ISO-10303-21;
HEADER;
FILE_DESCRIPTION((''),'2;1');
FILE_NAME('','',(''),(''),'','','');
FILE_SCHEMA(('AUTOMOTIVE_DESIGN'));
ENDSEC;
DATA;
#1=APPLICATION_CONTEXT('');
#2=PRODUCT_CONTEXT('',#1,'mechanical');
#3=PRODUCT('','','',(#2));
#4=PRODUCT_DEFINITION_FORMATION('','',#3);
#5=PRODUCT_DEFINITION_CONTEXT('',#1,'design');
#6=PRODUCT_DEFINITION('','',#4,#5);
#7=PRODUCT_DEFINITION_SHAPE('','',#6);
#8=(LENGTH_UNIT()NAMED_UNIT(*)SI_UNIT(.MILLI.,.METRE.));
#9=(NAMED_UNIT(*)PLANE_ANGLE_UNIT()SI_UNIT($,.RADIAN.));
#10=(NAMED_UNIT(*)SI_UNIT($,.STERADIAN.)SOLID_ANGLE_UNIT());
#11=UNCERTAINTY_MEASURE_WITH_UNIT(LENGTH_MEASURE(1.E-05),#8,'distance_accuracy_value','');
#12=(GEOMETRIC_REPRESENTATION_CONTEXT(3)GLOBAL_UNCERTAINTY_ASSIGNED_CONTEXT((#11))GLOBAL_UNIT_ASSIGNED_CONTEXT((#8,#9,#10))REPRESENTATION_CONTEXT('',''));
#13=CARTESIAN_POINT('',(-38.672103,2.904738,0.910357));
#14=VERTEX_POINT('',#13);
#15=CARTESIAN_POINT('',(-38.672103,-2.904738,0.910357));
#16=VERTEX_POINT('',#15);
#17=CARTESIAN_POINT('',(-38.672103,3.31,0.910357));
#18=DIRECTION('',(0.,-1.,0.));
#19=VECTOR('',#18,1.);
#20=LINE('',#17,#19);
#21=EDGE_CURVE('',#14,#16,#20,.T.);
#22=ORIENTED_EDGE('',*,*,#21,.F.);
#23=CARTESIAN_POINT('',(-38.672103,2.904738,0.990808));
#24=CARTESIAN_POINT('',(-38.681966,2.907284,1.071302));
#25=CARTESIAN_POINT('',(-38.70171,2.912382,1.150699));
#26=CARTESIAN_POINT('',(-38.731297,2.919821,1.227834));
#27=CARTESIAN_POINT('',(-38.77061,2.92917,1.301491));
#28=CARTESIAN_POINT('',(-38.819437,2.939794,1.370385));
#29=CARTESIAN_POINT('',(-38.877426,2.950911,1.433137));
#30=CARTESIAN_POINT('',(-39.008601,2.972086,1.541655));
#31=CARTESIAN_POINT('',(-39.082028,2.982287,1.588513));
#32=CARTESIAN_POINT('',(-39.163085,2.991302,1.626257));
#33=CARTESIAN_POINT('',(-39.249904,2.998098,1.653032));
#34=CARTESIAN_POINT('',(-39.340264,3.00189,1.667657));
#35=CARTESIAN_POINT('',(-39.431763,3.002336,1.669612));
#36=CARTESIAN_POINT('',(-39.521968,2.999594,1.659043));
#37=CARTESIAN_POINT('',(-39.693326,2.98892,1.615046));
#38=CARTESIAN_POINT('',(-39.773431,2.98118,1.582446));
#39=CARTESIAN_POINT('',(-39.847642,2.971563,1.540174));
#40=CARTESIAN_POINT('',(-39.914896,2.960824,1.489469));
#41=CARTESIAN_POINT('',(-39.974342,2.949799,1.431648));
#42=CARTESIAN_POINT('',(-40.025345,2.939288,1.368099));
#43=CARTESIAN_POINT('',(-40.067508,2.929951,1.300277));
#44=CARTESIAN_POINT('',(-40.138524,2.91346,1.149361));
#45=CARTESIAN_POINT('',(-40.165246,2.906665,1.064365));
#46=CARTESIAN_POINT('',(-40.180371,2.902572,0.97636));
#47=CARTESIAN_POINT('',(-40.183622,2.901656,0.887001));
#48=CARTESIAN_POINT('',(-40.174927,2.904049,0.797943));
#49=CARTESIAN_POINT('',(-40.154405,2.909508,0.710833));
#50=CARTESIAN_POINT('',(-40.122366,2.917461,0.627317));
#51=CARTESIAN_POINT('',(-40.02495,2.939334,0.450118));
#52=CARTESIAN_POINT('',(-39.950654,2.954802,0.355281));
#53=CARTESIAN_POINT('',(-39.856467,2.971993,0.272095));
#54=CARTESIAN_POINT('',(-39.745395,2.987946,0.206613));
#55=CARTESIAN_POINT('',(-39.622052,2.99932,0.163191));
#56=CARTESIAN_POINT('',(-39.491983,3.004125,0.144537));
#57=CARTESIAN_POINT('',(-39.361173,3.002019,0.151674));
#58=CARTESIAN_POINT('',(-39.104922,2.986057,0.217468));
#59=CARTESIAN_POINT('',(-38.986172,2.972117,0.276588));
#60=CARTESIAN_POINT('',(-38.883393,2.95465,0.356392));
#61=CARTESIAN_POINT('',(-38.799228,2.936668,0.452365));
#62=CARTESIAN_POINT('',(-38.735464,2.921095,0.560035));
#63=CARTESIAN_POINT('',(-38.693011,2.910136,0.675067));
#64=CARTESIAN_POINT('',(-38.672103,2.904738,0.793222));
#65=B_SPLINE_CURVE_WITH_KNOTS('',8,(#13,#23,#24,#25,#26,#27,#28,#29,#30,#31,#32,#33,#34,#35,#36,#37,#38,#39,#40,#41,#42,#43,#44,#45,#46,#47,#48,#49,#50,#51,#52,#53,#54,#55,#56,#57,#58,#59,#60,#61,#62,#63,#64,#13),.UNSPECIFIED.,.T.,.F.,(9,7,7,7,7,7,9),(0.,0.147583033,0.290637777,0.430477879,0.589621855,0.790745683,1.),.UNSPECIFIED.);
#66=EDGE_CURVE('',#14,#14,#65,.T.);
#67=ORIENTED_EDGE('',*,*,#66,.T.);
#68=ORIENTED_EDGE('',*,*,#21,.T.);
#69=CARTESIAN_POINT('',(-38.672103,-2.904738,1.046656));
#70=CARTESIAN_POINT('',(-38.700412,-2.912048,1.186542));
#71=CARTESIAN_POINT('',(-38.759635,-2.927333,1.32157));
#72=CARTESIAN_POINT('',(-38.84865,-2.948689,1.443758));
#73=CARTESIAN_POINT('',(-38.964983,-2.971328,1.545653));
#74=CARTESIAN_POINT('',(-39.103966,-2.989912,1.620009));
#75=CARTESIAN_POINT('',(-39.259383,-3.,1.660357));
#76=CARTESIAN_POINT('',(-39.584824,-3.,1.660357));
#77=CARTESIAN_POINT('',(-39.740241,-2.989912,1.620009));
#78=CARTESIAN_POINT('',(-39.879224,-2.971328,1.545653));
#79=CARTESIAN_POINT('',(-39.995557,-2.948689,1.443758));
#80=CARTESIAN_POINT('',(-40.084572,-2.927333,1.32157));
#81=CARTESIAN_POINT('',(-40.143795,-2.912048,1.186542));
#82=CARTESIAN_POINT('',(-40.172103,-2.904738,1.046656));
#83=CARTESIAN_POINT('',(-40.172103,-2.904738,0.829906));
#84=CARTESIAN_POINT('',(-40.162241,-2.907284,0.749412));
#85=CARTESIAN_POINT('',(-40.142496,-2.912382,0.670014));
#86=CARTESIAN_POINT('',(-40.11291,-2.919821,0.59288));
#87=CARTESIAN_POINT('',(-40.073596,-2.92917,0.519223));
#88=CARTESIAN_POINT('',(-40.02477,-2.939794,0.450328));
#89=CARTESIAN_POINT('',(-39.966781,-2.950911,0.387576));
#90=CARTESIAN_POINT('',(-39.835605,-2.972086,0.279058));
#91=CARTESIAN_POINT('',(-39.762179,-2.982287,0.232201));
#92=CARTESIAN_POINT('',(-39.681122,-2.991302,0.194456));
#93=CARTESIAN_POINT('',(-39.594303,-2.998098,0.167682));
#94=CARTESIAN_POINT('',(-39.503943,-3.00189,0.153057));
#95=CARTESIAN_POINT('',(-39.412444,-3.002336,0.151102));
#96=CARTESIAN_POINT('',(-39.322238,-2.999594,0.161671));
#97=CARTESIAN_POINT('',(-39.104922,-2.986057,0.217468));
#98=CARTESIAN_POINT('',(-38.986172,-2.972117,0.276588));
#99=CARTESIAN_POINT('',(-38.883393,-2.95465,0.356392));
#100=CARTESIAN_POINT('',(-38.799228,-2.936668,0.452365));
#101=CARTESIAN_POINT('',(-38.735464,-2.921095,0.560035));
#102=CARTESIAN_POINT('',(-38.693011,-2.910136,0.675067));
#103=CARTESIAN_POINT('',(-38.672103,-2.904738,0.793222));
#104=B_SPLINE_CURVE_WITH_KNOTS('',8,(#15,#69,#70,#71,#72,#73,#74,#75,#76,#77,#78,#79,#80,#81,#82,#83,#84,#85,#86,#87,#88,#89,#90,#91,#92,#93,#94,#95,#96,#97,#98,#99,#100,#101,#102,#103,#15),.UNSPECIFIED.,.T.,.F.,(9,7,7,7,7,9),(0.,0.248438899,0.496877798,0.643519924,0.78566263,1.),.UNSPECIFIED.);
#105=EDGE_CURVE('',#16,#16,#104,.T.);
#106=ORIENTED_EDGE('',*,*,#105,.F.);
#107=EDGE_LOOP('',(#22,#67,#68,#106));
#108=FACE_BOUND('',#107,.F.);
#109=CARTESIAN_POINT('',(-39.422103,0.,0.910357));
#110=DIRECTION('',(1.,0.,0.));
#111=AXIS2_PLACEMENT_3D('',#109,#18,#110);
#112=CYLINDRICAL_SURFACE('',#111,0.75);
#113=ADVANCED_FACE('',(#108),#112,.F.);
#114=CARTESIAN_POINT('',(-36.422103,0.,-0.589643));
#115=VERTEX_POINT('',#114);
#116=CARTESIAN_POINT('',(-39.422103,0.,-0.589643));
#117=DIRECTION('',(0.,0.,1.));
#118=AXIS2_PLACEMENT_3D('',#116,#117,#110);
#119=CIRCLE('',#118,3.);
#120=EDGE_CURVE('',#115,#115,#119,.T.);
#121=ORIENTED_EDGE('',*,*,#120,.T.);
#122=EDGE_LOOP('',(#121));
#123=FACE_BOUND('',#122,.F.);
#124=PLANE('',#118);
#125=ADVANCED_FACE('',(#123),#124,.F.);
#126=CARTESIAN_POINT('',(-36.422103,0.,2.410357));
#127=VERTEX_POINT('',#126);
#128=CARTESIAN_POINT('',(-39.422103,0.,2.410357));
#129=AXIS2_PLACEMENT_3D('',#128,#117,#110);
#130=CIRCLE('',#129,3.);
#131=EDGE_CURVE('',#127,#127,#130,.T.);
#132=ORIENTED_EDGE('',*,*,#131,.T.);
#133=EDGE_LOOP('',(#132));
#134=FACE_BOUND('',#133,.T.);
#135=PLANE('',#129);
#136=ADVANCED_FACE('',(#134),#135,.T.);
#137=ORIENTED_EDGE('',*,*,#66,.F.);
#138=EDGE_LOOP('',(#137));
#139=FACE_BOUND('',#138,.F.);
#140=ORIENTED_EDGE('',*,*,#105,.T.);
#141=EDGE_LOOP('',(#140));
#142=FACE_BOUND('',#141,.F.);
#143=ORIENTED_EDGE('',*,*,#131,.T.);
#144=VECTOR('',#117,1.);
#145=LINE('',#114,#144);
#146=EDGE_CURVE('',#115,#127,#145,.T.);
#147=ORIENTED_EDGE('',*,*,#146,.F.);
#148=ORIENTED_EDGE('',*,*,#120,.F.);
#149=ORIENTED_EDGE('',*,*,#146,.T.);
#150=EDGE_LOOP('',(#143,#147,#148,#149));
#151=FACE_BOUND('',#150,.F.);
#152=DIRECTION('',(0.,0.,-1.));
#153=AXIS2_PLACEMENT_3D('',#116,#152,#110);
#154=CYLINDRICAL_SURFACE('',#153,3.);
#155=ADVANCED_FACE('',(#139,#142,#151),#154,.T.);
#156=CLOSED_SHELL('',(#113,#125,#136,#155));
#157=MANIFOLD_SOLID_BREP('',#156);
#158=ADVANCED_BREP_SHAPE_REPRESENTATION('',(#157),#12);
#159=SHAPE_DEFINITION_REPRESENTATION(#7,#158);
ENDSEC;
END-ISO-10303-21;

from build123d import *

# Parameters (mm, degrees)
F2_R     = 3
F3_DEPTH = 3
F4_R     = 0.75
F5_DEPTH = 3.31


# Not quite as in the source:
# - a feature names something its author has since deleted; it is built from what else it names
# - the program builds the solid bodies; features that only make, move or delete a surface that nothing else refers to are left out


with BuildPart() as f3:
    # F2 (on Top) → F3 (new body)
    with BuildSketch(Plane.XY):
        with Locations((-39.4553284803, 0)):
            Circle(F2_R)
    extrude(amount=F3_DEPTH)

    # F4 (on Front) → F5 (cut, symmetric)
    with BuildSketch(Plane.XZ):
        with Locations((-39.4553284803, 1.5)):
            Circle(F4_R)
    extrude(amount=F5_DEPTH, both=True, mode=Mode.SUBTRACT)


with BuildPart() as f3_1:
    # F8: moved
    add(f3.part.moved(Location((0.033225133, 0, -0.5896431374))))


solid = f3_1.part
